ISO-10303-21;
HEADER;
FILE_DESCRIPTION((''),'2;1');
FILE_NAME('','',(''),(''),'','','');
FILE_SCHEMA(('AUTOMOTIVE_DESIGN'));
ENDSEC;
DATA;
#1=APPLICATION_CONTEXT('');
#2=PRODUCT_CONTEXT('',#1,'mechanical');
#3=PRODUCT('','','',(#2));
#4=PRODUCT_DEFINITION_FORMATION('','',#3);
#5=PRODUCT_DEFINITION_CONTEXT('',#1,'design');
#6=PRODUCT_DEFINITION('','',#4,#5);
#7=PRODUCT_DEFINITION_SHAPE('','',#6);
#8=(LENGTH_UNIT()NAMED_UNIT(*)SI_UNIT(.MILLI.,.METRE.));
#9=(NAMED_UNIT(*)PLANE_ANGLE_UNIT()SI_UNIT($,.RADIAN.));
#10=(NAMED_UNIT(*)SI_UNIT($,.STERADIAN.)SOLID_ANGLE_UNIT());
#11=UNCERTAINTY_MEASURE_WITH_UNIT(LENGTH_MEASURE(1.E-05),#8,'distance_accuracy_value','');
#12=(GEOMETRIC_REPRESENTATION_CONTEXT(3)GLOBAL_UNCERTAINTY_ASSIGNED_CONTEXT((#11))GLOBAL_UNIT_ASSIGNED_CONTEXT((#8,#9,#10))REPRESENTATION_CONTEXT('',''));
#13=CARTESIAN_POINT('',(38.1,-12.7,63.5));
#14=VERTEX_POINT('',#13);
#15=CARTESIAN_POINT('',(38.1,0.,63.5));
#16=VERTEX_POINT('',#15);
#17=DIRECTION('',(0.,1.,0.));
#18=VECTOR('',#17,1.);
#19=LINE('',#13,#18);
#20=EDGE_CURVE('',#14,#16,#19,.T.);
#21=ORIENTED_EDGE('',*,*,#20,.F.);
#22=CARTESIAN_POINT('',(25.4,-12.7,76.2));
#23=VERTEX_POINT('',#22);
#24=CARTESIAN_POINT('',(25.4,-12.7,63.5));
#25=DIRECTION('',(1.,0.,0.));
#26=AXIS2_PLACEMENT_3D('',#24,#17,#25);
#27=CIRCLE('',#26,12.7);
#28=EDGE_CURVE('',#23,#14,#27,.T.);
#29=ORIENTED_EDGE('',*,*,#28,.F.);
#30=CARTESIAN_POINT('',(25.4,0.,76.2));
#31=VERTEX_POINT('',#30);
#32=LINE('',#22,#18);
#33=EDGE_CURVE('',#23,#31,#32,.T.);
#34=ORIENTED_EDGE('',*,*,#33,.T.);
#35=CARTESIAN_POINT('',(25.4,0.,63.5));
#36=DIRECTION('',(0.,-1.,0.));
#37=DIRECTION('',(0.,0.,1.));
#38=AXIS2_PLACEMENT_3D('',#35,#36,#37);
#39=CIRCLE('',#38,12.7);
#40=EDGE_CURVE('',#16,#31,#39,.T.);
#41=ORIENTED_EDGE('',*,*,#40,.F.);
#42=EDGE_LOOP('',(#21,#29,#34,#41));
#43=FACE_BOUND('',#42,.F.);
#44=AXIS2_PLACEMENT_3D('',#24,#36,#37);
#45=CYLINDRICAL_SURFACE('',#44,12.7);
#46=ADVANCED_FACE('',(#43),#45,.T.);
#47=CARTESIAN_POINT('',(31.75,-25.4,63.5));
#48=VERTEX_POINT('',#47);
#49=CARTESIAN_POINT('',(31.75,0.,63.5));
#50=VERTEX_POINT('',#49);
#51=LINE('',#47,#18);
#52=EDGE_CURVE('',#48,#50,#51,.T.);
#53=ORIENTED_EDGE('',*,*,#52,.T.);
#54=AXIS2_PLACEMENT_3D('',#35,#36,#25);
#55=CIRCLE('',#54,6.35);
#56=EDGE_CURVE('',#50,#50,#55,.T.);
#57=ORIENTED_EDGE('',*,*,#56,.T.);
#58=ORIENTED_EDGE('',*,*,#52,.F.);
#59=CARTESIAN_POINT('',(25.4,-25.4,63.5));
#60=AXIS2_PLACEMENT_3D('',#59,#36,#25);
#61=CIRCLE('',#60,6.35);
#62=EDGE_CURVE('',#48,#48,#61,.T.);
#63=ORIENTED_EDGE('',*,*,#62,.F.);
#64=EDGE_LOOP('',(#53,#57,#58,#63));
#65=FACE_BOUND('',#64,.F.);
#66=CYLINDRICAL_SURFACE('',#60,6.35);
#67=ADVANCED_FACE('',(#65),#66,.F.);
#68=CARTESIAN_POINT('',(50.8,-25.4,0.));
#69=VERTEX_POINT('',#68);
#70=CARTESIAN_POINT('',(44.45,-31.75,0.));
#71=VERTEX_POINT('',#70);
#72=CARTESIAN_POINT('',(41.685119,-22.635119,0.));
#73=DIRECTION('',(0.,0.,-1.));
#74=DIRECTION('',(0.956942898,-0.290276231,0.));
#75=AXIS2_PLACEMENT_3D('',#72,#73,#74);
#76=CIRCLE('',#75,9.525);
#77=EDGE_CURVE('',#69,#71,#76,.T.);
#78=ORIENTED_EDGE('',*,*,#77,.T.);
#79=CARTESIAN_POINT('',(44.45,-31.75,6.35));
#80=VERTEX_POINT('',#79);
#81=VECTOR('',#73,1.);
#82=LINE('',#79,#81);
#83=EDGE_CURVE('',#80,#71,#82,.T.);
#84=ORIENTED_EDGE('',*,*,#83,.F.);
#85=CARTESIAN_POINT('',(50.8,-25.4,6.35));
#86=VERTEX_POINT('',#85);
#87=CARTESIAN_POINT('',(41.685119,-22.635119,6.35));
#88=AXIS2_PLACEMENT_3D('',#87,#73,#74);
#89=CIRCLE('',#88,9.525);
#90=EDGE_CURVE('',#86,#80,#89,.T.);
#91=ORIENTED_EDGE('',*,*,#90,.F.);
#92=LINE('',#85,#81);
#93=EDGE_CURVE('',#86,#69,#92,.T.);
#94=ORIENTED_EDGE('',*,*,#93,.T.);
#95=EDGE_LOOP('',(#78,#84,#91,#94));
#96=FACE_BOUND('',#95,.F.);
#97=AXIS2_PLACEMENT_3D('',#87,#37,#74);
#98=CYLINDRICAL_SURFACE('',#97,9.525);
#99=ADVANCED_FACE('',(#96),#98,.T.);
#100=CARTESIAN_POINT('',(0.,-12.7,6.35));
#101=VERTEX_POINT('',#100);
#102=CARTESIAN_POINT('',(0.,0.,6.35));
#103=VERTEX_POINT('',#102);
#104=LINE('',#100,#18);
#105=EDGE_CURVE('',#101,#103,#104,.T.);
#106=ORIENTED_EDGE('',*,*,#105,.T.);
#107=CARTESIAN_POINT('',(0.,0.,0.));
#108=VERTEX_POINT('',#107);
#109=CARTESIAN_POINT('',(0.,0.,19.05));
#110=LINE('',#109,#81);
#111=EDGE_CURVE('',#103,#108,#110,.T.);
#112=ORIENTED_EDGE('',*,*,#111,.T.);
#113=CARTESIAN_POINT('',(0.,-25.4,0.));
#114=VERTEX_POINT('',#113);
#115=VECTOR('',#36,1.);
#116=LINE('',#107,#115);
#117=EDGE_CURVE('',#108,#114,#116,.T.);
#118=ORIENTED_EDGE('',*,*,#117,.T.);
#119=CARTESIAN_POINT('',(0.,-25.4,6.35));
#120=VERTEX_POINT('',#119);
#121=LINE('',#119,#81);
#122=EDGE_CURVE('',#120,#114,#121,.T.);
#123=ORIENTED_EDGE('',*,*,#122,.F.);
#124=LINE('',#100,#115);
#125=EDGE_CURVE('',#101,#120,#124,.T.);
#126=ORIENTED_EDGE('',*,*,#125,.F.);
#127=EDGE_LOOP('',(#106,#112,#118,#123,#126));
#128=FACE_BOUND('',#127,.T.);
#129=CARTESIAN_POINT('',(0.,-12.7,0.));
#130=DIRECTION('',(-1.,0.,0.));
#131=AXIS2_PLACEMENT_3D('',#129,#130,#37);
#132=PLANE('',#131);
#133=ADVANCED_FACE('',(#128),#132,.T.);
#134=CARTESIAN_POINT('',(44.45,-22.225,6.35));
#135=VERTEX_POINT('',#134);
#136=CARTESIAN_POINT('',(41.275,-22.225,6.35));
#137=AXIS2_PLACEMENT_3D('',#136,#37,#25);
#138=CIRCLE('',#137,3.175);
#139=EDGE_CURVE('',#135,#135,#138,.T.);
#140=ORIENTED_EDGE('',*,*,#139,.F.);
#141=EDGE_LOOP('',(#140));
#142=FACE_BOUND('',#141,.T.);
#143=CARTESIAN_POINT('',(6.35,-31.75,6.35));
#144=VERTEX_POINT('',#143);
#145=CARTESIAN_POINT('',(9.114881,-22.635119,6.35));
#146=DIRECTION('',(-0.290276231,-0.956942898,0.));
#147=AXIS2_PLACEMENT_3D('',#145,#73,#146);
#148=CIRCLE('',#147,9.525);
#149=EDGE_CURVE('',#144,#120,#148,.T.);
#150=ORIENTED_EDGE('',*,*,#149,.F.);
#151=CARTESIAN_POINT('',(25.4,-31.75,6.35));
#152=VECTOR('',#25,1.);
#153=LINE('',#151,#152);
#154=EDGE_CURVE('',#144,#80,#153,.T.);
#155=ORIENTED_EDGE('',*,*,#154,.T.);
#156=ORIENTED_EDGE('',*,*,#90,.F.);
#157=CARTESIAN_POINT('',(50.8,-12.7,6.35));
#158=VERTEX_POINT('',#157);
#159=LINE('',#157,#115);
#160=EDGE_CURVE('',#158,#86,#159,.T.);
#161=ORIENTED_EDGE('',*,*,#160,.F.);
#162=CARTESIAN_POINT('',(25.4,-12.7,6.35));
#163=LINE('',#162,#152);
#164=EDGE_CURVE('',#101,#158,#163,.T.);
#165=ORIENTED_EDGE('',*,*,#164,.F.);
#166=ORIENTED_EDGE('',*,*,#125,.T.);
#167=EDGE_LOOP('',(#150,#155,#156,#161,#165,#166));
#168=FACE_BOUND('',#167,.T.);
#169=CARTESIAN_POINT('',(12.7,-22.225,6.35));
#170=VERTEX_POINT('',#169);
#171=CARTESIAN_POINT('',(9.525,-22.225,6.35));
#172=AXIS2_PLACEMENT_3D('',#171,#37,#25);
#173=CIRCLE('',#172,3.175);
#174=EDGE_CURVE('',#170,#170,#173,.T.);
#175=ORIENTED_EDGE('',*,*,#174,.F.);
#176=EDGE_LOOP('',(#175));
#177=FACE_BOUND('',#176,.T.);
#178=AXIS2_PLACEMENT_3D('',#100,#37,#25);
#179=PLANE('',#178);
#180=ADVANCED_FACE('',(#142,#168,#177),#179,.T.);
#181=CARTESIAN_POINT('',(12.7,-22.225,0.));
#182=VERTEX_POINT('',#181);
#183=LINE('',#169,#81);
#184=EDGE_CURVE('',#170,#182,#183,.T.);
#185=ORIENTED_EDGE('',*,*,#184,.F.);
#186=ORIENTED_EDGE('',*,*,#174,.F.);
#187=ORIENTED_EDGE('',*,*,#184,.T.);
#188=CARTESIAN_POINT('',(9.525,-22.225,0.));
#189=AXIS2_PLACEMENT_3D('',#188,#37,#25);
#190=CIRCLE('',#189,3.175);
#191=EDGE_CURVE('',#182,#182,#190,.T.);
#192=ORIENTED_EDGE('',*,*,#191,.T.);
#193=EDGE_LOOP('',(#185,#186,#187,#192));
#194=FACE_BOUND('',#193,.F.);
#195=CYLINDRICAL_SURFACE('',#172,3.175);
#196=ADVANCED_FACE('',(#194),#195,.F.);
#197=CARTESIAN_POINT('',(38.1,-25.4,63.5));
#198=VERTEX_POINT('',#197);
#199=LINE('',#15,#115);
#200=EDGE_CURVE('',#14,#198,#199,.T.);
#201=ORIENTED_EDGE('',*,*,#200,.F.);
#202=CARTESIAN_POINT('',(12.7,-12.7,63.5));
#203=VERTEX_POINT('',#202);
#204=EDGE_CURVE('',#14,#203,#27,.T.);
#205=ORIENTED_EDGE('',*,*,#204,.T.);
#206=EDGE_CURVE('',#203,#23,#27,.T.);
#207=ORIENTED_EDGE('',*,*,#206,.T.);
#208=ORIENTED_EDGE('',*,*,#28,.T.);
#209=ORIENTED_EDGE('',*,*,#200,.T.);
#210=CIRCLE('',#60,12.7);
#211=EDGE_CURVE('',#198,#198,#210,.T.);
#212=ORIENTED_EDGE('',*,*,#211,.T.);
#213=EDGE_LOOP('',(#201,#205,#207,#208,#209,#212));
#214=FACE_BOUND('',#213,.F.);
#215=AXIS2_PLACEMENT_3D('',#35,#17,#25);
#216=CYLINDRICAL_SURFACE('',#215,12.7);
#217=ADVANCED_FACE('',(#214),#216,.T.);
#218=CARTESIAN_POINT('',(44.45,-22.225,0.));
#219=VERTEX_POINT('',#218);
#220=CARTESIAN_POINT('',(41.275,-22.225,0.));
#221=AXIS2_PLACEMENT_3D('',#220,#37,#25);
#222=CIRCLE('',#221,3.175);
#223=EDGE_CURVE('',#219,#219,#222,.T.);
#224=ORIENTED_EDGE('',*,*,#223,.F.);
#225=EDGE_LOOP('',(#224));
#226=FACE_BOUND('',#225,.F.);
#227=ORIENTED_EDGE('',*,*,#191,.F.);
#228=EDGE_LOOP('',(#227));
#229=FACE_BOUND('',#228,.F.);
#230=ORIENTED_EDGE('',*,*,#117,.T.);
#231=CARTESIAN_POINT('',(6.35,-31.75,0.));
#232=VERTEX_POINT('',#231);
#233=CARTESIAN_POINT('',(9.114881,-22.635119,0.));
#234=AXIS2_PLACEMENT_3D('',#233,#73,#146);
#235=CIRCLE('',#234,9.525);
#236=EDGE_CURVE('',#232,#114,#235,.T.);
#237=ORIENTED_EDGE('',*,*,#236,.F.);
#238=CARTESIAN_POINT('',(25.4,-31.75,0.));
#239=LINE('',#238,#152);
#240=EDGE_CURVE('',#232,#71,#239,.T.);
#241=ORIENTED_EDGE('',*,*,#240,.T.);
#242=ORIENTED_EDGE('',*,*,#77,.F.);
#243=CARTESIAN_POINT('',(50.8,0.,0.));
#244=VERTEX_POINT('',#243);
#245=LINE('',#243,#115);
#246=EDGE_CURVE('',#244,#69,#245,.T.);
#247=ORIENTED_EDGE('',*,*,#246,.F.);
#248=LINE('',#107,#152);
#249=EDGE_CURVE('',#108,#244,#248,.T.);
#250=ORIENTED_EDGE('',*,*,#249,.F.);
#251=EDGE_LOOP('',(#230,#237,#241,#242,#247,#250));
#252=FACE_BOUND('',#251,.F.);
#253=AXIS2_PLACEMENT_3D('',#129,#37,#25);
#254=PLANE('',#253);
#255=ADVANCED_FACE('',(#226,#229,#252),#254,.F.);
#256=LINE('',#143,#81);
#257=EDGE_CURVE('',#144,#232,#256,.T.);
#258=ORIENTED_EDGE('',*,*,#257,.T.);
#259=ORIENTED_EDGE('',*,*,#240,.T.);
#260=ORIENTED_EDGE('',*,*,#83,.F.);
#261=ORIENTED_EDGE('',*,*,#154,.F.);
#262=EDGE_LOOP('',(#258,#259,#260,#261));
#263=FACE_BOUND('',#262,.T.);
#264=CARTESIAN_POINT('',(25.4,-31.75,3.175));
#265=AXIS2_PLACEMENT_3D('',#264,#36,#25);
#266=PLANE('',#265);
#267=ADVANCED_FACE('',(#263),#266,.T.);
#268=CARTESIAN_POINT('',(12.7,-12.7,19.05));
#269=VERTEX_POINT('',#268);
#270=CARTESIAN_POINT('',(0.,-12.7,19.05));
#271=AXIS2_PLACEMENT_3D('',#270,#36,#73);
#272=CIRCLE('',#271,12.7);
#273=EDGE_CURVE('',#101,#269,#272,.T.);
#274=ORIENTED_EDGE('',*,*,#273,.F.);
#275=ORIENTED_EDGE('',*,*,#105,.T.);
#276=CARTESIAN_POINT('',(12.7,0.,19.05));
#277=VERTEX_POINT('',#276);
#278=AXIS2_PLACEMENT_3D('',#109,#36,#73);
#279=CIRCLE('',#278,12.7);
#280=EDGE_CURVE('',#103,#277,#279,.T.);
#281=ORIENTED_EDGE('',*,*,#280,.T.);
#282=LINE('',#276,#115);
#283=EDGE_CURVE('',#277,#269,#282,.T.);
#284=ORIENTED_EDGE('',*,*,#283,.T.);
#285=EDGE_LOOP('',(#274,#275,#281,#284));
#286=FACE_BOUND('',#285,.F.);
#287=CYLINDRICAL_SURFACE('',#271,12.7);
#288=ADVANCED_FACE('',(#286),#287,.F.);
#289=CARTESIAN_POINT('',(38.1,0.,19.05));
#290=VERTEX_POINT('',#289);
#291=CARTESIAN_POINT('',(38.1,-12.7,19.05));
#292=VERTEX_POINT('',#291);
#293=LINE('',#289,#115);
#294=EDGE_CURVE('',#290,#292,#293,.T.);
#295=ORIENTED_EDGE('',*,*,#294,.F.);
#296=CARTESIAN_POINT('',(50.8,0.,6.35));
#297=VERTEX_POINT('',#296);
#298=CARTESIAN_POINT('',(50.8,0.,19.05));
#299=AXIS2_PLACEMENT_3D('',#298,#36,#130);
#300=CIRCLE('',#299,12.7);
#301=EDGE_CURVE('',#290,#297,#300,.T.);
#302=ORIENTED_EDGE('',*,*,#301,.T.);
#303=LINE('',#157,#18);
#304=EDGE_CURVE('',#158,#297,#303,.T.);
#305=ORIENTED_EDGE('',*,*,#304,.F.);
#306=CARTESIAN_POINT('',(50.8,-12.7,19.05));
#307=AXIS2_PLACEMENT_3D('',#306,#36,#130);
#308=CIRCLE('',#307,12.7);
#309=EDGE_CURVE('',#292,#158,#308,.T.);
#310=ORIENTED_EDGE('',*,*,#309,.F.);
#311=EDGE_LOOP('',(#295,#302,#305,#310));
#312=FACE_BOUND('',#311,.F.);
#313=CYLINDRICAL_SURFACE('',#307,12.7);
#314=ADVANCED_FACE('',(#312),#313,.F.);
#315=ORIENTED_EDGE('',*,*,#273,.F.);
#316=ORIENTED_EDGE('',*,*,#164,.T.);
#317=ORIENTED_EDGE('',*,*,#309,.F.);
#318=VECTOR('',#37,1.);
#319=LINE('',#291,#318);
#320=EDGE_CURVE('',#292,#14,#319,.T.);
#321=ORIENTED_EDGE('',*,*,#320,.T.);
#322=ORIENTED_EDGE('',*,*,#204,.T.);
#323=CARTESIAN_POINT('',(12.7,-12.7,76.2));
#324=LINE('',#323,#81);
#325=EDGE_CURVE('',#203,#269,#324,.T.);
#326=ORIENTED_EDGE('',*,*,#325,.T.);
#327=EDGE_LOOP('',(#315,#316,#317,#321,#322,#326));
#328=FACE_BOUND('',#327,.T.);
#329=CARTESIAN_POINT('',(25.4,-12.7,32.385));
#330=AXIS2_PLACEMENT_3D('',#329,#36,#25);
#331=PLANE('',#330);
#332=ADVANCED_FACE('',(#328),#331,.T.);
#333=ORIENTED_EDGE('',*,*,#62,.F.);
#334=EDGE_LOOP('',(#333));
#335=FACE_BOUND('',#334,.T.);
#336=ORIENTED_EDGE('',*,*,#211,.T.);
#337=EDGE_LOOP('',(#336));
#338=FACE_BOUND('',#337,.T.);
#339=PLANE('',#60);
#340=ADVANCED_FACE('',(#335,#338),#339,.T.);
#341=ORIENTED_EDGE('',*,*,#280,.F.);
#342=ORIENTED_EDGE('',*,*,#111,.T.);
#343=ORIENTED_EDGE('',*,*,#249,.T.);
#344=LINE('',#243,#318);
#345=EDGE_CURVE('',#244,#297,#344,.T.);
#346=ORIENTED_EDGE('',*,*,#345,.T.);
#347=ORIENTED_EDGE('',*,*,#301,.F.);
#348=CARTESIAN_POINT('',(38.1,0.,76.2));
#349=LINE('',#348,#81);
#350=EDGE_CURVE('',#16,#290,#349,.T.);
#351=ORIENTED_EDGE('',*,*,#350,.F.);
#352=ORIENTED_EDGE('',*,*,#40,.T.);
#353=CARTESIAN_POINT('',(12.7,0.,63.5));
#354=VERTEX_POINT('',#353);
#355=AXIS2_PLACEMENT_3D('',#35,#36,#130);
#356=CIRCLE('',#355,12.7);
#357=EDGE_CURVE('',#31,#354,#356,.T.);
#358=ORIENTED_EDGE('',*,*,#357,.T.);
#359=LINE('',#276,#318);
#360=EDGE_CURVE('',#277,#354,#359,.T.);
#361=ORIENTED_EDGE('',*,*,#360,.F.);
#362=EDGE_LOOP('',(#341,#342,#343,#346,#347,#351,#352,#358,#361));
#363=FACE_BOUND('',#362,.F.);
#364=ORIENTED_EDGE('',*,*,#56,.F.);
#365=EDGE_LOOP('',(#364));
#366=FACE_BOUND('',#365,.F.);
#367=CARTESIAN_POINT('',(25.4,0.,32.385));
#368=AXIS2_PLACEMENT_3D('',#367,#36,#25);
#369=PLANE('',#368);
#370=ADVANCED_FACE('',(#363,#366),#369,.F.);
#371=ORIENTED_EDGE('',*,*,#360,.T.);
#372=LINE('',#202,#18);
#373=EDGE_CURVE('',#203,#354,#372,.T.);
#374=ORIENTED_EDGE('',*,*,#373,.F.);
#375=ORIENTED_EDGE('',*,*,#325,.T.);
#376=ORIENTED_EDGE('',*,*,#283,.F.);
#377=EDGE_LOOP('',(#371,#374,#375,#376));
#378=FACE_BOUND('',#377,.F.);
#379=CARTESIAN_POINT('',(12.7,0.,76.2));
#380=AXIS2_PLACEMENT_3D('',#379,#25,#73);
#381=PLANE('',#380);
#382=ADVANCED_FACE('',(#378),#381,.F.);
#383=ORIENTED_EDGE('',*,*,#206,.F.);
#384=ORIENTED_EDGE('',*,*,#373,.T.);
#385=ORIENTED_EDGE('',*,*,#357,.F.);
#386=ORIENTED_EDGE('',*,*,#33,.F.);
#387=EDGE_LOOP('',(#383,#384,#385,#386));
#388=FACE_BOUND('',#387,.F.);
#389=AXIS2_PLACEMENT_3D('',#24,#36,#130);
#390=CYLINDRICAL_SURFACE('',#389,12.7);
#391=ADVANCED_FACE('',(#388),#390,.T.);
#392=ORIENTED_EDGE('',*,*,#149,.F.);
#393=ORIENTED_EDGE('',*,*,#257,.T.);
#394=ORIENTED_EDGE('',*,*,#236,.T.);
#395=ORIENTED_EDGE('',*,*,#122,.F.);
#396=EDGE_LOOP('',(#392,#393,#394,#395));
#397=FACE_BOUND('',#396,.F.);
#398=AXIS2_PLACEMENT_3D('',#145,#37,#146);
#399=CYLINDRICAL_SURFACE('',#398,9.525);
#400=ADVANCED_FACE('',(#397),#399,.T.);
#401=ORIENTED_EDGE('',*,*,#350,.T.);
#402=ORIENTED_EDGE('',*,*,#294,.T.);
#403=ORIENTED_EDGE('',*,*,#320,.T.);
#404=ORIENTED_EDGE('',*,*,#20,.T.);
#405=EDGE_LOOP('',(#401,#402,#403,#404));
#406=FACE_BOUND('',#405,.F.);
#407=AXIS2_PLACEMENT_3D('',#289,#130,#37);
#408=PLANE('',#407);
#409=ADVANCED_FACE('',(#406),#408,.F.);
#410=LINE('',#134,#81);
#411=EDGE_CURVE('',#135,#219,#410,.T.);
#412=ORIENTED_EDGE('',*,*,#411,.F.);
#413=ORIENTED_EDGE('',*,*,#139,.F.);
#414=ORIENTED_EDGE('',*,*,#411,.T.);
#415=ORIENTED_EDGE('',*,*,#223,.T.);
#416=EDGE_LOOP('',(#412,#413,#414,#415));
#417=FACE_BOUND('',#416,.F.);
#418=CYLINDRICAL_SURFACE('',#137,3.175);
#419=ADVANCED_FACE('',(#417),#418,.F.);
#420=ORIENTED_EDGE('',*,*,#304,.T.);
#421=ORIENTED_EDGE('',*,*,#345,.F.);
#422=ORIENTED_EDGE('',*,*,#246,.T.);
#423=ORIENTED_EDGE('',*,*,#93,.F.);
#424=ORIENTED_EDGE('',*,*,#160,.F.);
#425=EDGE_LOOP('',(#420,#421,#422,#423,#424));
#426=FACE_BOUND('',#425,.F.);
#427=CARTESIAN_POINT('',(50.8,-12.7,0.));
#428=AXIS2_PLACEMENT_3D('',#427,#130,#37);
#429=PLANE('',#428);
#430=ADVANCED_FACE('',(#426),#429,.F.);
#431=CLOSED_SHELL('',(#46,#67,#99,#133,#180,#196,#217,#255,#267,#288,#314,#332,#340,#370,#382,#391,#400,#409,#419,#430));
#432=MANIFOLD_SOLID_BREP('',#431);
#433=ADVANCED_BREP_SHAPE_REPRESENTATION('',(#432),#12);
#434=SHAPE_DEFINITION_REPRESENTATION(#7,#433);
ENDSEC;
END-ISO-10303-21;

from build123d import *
from build123d import SkipClean  # not in build123d's __all__

# Parameters (mm, degrees)
F1_DEPTH  = 12.7
F2_W      = 50.8
F2_H      = 6.35
F3_DEPTH  = 19.05
F5_DEPTH  = 12.7
F7_R      = 12.7
F8_DEPTH  = 25.4
F9_R      = 6.35
F10_DEPTH = 25.4
F11_R     = 3.175
F12_DEPTH = 6.35


with BuildPart() as f1:
    # F0 (on Front) → F1 (new body)
    with BuildSketch(Plane.XZ):
        Polygon((0, 19.05), (0, 0), (50.8, 0), (50.8, 19.05), (38.1, 19.05), (38.1, 76.2), (12.7, 76.2), (12.7, 19.05), align=None)
    extrude(amount=F1_DEPTH)

    # F2 (on face) → F3 (join)
    with BuildSketch(Plane.XZ.offset(12.7)):
        with Locations((25.4, 3.175)):
            Rectangle(F2_W, F2_H)
    extrude(amount=F3_DEPTH)

    # F4 (on face) → F5 (cut)
    with BuildSketch(Plane.XZ.offset(12.7)):
        with BuildLine():
            Line((0, 19.05), (0, 6.35))
            ThreePointArc((0, 6.35), (8.9802561211, 10.0697438789), (12.7, 19.05))
            Line((12.7, 19.05), (0, 19.05))
        make_face()
        with BuildLine():
            Line((50.8, 19.05), (38.1, 19.05))
            ThreePointArc((38.1, 19.05), (41.8197438789, 10.0697438789), (50.8, 6.35))
            Line((50.8, 6.35), (50.8, 19.05))
        make_face()
    extrude(amount=-F5_DEPTH, mode=Mode.SUBTRACT)

    # F7 (on Front) → F8 (join)
    with BuildSketch(Plane.XZ):
        with Locations((25.4, 63.5)):
            Circle(F7_R)
    extrude(amount=F8_DEPTH)

    # F9 (on face) + F8_face1 (on face) → F10 (cut)
    with BuildSketch(Plane.XZ.offset(25.4)):
        with Locations((25.4, 63.5)):
            Circle(F9_R)
    with BuildSketch(Plane(origin=(35.2632271754, -12.7, 73.3632271754), x_dir=(1, 0, 0), z_dir=(0, -1, 0))):
        with BuildLine():
            Line((2.8367728246, -9.8632271754), (2.8367728246, 2.8367728246))
            Line((2.8367728246, 2.8367728246), (-9.8632271754, 2.8367728246))
            ThreePointArc((-9.8632271754, 2.8367728246), (-0.8829710543, -0.8829710543), (2.8367728246, -9.8632271754))
        make_face()
        with BuildLine():
            ThreePointArc((-22.5632271754, -9.8632271754), (-18.8434832965, -0.8829710543), (-9.8632271754, 2.8367728246))
            Line((-9.8632271754, 2.8367728246), (-22.5632271754, 2.8367728246))
            Line((-22.5632271754, 2.8367728246), (-22.5632271754, -9.8632271754))
        make_face()
    with SkipClean():  # cleaning this boolean's faces spoils the solid; the shape is the same uncleaned
        extrude(amount=-F10_DEPTH, mode=Mode.SUBTRACT)

    # F6 (on face) + F11 (on face) → F12 (cut)
    with BuildSketch(Plane.XY.offset(6.35)):
        with BuildLine():
            Line((0, -31.75), (6.35, -31.75))
            ThreePointArc((6.35, -31.75), (2.3796890107, -29.3703109893), (0, -25.4))
            Line((0, -25.4), (0, -31.75))
        make_face()
        with BuildLine():
            ThreePointArc((50.8, -25.4), (48.4203109893, -29.3703109893), (44.45, -31.75))
            Line((44.45, -31.75), (50.8, -31.75))
            Line((50.8, -31.75), (50.8, -25.4))
        make_face()
    with BuildSketch(Plane.XY.offset(6.35)):
        with Locations((9.525, -22.225)):
            Circle(F11_R)
        with Locations((41.275, -22.225)):
            Circle(F11_R)
    with SkipClean():  # cleaning this boolean's faces spoils the solid; the shape is the same uncleaned
        extrude(amount=-F12_DEPTH, mode=Mode.SUBTRACT)


solid = f1.part
